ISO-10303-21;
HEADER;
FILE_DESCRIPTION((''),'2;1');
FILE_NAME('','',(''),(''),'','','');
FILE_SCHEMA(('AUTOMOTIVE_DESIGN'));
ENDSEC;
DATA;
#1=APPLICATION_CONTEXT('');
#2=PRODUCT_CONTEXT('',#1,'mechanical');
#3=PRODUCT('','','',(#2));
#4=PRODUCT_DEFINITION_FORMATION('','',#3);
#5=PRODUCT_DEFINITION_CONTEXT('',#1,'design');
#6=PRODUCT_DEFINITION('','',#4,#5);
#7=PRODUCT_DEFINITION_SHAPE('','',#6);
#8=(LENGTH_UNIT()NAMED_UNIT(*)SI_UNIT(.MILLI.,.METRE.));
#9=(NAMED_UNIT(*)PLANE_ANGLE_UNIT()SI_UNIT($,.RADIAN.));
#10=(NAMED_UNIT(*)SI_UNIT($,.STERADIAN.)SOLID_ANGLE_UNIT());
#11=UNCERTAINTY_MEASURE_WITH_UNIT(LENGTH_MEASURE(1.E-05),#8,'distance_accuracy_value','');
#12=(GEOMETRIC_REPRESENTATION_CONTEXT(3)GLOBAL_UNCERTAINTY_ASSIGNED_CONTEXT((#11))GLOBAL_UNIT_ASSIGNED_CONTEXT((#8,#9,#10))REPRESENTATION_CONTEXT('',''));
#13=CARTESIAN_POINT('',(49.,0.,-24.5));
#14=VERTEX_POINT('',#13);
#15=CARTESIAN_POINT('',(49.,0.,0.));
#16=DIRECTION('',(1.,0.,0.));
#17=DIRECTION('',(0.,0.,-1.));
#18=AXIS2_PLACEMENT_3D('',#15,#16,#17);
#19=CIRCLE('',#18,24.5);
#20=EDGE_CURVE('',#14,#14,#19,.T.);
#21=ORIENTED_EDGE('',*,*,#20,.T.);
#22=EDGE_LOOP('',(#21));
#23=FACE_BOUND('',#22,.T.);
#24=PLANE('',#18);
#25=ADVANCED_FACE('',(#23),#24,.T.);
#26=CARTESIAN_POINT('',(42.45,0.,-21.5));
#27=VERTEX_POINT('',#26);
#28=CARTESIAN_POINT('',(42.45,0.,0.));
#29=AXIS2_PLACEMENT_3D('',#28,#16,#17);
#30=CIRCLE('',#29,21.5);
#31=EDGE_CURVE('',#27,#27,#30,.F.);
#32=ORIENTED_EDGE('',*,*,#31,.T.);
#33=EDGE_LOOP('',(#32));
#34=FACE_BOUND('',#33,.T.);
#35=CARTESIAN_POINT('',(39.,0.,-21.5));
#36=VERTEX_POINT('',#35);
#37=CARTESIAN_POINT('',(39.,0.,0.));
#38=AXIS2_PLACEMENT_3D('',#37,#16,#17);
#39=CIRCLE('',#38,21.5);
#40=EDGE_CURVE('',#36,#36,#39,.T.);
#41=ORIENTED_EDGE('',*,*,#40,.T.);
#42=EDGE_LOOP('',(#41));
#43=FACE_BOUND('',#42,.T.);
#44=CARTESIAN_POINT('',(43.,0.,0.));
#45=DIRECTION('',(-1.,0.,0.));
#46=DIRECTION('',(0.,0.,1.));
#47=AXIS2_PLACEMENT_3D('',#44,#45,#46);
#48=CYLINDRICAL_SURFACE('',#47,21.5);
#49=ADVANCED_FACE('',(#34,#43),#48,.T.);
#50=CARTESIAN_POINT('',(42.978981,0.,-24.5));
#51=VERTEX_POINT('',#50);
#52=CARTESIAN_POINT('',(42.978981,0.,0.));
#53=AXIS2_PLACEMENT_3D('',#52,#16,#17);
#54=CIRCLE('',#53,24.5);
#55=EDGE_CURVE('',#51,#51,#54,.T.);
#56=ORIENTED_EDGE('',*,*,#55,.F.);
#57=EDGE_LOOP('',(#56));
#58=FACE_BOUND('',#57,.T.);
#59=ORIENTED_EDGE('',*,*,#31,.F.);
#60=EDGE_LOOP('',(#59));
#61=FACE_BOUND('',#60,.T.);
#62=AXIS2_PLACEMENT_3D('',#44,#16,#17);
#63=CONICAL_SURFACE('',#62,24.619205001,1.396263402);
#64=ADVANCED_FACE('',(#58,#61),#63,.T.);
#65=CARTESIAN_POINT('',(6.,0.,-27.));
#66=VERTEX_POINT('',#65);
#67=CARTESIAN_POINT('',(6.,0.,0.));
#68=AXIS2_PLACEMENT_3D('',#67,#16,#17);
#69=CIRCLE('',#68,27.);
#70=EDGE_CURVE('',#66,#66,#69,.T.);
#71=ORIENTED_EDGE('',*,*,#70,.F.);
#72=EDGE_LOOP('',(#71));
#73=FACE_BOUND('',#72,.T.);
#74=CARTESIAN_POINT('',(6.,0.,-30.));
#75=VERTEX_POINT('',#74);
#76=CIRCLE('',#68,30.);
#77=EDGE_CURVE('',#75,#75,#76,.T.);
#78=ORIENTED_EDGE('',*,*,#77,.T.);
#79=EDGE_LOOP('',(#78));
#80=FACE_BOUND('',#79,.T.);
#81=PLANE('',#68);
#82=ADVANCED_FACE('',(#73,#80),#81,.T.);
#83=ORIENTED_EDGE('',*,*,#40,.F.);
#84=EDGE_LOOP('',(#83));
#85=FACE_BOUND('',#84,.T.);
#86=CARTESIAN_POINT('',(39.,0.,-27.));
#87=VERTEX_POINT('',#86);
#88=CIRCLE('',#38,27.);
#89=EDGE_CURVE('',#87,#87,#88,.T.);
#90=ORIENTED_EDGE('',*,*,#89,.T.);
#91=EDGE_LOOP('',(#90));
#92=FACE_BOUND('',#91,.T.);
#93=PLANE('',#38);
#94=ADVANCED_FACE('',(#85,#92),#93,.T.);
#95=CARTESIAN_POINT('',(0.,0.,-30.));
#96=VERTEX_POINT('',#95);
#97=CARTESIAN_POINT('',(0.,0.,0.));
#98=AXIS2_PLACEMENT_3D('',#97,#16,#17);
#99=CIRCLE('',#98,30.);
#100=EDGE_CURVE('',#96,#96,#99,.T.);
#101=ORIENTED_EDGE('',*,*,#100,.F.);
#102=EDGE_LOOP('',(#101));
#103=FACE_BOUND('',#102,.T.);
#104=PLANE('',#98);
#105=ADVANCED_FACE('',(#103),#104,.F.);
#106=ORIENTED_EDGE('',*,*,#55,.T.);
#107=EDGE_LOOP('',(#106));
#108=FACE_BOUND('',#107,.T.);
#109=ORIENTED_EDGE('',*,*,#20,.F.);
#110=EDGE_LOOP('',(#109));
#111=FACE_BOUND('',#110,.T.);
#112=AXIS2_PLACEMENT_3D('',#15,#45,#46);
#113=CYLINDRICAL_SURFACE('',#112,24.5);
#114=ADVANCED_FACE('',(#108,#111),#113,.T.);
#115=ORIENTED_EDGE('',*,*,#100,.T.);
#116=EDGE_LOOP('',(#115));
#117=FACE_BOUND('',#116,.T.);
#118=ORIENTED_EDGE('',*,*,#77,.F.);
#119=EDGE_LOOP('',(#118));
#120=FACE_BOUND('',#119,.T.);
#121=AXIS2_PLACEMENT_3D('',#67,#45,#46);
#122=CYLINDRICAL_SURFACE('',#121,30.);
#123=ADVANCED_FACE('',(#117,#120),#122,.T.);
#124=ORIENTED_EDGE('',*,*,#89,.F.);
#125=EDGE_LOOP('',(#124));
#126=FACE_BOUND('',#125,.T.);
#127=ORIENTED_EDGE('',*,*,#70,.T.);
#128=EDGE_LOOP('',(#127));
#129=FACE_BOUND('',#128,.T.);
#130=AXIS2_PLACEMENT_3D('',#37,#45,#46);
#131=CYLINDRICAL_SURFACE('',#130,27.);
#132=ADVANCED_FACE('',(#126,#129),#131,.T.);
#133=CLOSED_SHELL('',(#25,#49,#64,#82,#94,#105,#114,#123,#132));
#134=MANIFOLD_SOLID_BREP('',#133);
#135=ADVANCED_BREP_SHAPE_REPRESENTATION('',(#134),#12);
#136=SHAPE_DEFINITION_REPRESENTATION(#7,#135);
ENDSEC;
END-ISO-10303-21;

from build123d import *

# Parameters (mm, degrees)
SKETCH1_R        = 30
BIGLIP_DEPTH     = 6
SKETCH2_R        = 27
INNERTUBE_DEPTH  = 33
SKETCH3_R        = 21.5
CONNECTION_DEPTH = 4
SKETCH4_R        = 24.5
SMALLLIP_DEPTH   = 6
CHAMFER1_SIZE    = 3.119205001
CHAMFER1_SIZE_2  = 0.55


with BuildPart() as part:
    # Sketch1 → bigLip (new body)
    with BuildSketch(Plane(origin=(0, 0, 0), x_dir=(0, 0, -1), z_dir=(1, 0, 0))):
        Circle(SKETCH1_R)
    extrude(amount=BIGLIP_DEPTH)

    # Sketch2 → innerTube (add)
    with BuildSketch(Plane(origin=(6, 0, 0), x_dir=(0, 0, -1), z_dir=(1, 0, 0))):
        Circle(SKETCH2_R)
    extrude(amount=INNERTUBE_DEPTH)

    # Sketch3 → connection (add)
    with BuildSketch(Plane(origin=(39, 0, 0), x_dir=(0, 0, -1), z_dir=(1, 0, 0))):
        Circle(SKETCH3_R)
    extrude(amount=CONNECTION_DEPTH)

    # Sketch4 → smallLip (add)
    with BuildSketch(Plane(origin=(43, 0, 0), x_dir=(0, 0, -1), z_dir=(1, 0, 0))):
        Circle(SKETCH4_R)
    extrude(amount=SMALLLIP_DEPTH)

    # Chamfer1
    # the kernel refuses this chamfer: 3.119205001, 0.55 mm, written as the material it adds along each edge
    with BuildSketch(Plane(origin=(43, 0, 0), x_dir=(0, 0, -1), z_dir=(0, -1, 0))) as chamfer1_piece_1_section:
        Polygon((21.5 + CHAMFER1_SIZE, 0), (21.5, -CHAMFER1_SIZE_2), (21.5, 0), align=None)
    chamfer1_piece_1 = revolve(axis=Axis((43, 0, 0), (1, 0, 0)), mode=Mode.PRIVATE)
    chamfer1_piece_1 = chamfer1_piece_1 & Plane(origin=(42.756656471, 0, 0), x_dir=(0, 0, -1), z_dir=(-1, 0, 0)) * Cylinder(24.5, 99, mode=Mode.PRIVATE)
    add(chamfer1_piece_1)


solid = part.part
